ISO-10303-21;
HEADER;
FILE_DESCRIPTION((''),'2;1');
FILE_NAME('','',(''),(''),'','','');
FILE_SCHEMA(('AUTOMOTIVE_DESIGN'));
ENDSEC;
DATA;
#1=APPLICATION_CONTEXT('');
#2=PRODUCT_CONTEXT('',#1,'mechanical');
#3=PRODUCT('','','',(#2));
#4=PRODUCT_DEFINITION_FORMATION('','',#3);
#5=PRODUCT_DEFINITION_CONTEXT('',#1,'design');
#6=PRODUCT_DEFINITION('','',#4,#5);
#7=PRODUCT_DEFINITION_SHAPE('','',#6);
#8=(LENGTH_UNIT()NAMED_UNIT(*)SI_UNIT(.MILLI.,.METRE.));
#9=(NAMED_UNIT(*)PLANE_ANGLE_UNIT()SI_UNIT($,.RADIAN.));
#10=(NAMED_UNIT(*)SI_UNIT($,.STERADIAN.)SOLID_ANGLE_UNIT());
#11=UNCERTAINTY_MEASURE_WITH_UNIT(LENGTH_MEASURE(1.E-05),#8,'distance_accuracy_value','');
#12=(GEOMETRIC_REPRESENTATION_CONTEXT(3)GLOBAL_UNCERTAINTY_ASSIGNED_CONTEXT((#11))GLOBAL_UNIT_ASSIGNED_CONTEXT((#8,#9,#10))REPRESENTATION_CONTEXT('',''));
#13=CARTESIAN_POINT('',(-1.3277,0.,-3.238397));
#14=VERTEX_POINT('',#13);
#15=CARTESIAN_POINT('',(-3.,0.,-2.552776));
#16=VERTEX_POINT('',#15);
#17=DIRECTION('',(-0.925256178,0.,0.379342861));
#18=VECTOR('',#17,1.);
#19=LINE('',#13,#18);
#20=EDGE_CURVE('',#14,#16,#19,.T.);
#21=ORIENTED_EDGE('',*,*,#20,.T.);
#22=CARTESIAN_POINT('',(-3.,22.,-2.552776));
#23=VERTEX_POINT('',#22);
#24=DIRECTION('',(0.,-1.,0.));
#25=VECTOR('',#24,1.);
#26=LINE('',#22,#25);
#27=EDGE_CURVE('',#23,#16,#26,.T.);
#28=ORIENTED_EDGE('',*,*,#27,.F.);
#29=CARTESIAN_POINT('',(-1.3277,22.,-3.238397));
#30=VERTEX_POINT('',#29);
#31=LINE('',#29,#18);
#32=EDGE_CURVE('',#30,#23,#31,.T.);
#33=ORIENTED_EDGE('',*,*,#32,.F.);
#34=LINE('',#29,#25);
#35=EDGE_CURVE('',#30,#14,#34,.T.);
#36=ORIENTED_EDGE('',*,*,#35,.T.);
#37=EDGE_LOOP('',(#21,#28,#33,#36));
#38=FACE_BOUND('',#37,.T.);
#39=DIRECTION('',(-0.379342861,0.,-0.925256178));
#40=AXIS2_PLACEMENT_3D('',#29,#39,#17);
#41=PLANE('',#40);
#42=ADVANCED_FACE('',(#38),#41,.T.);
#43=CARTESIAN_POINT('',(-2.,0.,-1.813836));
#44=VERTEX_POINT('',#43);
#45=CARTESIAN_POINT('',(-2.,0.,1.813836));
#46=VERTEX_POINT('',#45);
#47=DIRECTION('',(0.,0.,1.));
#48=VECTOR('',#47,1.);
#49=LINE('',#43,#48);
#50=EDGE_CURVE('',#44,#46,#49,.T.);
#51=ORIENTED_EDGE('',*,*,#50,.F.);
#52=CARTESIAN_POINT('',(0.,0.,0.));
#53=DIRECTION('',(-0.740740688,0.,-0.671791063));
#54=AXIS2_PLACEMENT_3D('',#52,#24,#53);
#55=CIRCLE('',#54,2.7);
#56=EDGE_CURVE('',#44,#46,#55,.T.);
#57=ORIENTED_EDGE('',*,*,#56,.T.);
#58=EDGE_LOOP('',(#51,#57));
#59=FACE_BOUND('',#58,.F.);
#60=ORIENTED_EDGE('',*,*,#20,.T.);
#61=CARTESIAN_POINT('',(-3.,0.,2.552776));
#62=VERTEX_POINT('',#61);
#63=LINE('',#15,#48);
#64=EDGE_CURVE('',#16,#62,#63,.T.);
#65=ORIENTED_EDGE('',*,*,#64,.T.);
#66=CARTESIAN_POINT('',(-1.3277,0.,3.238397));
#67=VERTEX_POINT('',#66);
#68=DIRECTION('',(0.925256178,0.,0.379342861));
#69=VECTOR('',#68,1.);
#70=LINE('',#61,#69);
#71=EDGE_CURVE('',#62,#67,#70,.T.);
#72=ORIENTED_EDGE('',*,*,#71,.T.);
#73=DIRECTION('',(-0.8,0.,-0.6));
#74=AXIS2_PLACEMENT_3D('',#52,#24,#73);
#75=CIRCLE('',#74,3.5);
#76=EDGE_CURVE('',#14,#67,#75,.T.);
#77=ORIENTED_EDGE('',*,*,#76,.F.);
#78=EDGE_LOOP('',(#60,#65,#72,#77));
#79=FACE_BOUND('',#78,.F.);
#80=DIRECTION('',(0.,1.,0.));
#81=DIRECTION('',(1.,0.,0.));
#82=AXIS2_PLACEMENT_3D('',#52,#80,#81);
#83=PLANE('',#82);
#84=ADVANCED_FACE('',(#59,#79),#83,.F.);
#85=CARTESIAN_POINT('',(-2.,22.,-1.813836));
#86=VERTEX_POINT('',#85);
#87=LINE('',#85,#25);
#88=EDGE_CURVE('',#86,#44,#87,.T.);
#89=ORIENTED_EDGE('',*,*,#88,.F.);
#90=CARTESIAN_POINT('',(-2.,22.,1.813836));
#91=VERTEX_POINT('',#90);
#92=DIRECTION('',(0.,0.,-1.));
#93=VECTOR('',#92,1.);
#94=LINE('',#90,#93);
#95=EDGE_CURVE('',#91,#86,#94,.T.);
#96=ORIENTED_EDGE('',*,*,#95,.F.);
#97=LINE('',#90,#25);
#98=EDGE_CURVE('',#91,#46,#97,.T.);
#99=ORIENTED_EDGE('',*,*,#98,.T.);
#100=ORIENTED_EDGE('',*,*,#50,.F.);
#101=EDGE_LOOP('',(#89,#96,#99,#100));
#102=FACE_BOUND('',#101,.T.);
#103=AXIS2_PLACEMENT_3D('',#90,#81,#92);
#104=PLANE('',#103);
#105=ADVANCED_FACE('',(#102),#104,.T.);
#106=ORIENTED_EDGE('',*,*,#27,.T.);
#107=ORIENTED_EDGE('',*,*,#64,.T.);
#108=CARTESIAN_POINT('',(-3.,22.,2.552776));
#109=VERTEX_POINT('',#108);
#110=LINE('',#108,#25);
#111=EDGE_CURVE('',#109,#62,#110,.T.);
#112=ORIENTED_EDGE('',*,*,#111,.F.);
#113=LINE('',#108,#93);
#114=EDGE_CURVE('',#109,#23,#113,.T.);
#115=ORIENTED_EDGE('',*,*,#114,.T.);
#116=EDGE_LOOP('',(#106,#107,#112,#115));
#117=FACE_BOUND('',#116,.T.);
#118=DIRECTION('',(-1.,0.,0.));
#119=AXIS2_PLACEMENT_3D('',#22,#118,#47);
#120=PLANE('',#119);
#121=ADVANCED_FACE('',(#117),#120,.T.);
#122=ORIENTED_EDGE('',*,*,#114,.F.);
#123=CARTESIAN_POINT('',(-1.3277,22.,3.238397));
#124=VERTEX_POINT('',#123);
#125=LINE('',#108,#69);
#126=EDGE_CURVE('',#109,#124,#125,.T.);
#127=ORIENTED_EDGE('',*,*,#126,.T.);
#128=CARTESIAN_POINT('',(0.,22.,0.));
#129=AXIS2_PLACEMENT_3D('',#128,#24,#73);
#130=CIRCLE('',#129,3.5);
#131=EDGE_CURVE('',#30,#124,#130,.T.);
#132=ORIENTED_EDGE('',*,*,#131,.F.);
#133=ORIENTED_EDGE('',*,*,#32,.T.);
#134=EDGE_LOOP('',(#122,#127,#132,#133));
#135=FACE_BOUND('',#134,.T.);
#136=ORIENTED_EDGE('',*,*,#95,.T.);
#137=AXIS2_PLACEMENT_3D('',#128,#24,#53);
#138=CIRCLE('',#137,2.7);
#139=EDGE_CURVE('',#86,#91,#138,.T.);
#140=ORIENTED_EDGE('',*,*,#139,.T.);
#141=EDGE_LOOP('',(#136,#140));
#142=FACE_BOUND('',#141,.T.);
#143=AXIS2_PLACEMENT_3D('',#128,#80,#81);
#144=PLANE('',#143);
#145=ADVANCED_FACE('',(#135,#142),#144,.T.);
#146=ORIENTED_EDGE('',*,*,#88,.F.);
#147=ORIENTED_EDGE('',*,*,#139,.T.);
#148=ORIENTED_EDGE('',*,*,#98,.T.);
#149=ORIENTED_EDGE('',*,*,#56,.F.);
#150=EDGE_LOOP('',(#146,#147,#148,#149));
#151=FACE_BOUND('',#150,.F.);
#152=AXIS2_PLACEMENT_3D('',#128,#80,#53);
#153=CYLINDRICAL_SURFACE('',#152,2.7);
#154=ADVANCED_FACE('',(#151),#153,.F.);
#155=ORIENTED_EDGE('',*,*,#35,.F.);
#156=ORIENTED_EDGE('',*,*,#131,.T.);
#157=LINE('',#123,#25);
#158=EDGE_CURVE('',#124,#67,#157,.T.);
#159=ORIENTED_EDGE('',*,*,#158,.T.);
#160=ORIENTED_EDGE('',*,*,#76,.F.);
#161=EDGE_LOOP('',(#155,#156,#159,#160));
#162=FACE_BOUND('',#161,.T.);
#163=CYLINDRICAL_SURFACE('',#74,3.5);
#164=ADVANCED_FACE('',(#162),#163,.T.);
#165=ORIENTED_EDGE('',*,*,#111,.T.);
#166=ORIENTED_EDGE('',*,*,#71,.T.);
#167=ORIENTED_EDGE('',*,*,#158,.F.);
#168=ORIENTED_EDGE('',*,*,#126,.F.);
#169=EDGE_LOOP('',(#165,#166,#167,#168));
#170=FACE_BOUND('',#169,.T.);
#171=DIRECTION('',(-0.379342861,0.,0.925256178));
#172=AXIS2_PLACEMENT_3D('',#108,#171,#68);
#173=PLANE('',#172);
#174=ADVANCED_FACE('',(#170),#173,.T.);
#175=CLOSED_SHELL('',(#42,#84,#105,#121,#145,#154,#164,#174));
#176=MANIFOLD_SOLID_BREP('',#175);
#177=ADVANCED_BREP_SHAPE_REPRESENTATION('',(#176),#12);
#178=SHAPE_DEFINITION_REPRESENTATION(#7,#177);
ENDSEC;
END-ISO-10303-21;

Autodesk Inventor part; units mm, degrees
ref_plane "YZ Plane" through (0, 0, 0) normal (1, 0, 0) x (0, 1, 0)
ref_plane "XZ Plane" through (0, 0, 0) normal (0, 1, 0) x (-1, 0, 0)
ref_plane "XY Plane" through (0, 0, 0) normal (0, 0, 1) x (1, 0, 0)
sketch "Sketch1" plane through (0, 0, 0) normal (0, 1, 0) x (-1, 0, 0)
  arc A0 (2, 1.5) -> (2, -1.5) centre (0, 0) ccw
  line L0 (2, 0) -> (2, -1.5)
  line L1 (2, 0) -> (2, 1.5)
sketch "Sketch1 outline for Extrusion1" plane through (0, 0, 0) normal (0, 1, 0) x (-1, 0, 0)
  line L0 (2, 0) -> (2, -1.5)
  arc A0 (2, -1.5) -> (2, 1.5) centre (0, 0) cw
  line L1 (2, 1.5) -> (2, 0)
extrude "Extrusion1" add sketch "Sketch1 outline for Extrusion1" along normal blind 22
thicken "Thicken1" operation add thickness 1 both sides no extend neighbours yes toward (-0.5598596, 0, 0.8285875) faces at (-1.399649, 14.666667, 2.071469) (-2, 14.666667, -0.5) (-2, 14.666667, 1)
sketch "Sketch2" plane through (0, 22, 0) normal (0, 1, 0) x (1, 0, 0)
  arc A0 (-2, -1.813836) -> (-2, 1.813836) centre (0, 0) ccw
  line L0 (-2, 0) -> (-2, 1.813836)
  line L1 (-2, 0) -> (-2, -1.813836)
  dimension "d8" = 5.4
sketch "Sketch2 outline for Extrusion2" plane through (0, 22, 0) normal (0, 1, 0) x (1, 0, 0)
  line L0 (-2, 0) -> (-2, 1.813836)
  arc A0 (-2, 1.813836) -> (-2, -1.813836) centre (0, 0) cw
  line L1 (-2, -1.813836) -> (-2, 0)
extrude "Extrusion2" cut sketch "Sketch2 outline for Extrusion2" against normal blind 22
sketch "Sketch3" plane through (0, 22, 0) normal (0, 1, 0) x (1, 0, 0)
  arc A0 (-3, -1.802776) -> (-3, 1.802776) centre (0, 0) ccw
  line L0 (-3, -1.802776) -> (-3, 2.552776)
  line L1 (-3, 2.552776) -> (-1.3277, 3.238397)
  line L2 (-3, -1.802776) -> (-3, -2.552776)
  line L3 (-3, -2.552776) -> (-1.3277, -3.238397)
  line L4 (-1.3277, -3.238397) -> (-2, -1.813836)
  line L5 (-2, 1.813836) -> (-2, -1.813836)
  line L6 (-2, -1.813836) -> (-2, 1.813836)
  line L7 (-2, 1.813836) -> (-1.3277, 3.238397)
  dimension "d12" = 4.35555
  dimension "d13" = 0.75
sketch "Sketch3 outline for Extrusion3" plane through (0, 22, 0) normal (0, 1, 0) x (1, 0, 0)
  line L0 (-3, -2.552776) -> (-1.3277, -3.238397)
  line L1 (-1.3277, -3.238397) -> (-2, -1.813836)
  line L2 (-2, -1.813836) -> (-2, 1.813836)
  line L3 (-2, 1.813836) -> (-1.3277, 3.238397)
  line L4 (-1.3277, 3.238397) -> (-3, 2.552776)
  line L5 (-3, 2.552776) -> (-3, -2.552776)
extrude "Extrusion3" add sketch "Sketch3 outline for Extrusion3" against normal blind 22
properties part number "MirrorMount"
